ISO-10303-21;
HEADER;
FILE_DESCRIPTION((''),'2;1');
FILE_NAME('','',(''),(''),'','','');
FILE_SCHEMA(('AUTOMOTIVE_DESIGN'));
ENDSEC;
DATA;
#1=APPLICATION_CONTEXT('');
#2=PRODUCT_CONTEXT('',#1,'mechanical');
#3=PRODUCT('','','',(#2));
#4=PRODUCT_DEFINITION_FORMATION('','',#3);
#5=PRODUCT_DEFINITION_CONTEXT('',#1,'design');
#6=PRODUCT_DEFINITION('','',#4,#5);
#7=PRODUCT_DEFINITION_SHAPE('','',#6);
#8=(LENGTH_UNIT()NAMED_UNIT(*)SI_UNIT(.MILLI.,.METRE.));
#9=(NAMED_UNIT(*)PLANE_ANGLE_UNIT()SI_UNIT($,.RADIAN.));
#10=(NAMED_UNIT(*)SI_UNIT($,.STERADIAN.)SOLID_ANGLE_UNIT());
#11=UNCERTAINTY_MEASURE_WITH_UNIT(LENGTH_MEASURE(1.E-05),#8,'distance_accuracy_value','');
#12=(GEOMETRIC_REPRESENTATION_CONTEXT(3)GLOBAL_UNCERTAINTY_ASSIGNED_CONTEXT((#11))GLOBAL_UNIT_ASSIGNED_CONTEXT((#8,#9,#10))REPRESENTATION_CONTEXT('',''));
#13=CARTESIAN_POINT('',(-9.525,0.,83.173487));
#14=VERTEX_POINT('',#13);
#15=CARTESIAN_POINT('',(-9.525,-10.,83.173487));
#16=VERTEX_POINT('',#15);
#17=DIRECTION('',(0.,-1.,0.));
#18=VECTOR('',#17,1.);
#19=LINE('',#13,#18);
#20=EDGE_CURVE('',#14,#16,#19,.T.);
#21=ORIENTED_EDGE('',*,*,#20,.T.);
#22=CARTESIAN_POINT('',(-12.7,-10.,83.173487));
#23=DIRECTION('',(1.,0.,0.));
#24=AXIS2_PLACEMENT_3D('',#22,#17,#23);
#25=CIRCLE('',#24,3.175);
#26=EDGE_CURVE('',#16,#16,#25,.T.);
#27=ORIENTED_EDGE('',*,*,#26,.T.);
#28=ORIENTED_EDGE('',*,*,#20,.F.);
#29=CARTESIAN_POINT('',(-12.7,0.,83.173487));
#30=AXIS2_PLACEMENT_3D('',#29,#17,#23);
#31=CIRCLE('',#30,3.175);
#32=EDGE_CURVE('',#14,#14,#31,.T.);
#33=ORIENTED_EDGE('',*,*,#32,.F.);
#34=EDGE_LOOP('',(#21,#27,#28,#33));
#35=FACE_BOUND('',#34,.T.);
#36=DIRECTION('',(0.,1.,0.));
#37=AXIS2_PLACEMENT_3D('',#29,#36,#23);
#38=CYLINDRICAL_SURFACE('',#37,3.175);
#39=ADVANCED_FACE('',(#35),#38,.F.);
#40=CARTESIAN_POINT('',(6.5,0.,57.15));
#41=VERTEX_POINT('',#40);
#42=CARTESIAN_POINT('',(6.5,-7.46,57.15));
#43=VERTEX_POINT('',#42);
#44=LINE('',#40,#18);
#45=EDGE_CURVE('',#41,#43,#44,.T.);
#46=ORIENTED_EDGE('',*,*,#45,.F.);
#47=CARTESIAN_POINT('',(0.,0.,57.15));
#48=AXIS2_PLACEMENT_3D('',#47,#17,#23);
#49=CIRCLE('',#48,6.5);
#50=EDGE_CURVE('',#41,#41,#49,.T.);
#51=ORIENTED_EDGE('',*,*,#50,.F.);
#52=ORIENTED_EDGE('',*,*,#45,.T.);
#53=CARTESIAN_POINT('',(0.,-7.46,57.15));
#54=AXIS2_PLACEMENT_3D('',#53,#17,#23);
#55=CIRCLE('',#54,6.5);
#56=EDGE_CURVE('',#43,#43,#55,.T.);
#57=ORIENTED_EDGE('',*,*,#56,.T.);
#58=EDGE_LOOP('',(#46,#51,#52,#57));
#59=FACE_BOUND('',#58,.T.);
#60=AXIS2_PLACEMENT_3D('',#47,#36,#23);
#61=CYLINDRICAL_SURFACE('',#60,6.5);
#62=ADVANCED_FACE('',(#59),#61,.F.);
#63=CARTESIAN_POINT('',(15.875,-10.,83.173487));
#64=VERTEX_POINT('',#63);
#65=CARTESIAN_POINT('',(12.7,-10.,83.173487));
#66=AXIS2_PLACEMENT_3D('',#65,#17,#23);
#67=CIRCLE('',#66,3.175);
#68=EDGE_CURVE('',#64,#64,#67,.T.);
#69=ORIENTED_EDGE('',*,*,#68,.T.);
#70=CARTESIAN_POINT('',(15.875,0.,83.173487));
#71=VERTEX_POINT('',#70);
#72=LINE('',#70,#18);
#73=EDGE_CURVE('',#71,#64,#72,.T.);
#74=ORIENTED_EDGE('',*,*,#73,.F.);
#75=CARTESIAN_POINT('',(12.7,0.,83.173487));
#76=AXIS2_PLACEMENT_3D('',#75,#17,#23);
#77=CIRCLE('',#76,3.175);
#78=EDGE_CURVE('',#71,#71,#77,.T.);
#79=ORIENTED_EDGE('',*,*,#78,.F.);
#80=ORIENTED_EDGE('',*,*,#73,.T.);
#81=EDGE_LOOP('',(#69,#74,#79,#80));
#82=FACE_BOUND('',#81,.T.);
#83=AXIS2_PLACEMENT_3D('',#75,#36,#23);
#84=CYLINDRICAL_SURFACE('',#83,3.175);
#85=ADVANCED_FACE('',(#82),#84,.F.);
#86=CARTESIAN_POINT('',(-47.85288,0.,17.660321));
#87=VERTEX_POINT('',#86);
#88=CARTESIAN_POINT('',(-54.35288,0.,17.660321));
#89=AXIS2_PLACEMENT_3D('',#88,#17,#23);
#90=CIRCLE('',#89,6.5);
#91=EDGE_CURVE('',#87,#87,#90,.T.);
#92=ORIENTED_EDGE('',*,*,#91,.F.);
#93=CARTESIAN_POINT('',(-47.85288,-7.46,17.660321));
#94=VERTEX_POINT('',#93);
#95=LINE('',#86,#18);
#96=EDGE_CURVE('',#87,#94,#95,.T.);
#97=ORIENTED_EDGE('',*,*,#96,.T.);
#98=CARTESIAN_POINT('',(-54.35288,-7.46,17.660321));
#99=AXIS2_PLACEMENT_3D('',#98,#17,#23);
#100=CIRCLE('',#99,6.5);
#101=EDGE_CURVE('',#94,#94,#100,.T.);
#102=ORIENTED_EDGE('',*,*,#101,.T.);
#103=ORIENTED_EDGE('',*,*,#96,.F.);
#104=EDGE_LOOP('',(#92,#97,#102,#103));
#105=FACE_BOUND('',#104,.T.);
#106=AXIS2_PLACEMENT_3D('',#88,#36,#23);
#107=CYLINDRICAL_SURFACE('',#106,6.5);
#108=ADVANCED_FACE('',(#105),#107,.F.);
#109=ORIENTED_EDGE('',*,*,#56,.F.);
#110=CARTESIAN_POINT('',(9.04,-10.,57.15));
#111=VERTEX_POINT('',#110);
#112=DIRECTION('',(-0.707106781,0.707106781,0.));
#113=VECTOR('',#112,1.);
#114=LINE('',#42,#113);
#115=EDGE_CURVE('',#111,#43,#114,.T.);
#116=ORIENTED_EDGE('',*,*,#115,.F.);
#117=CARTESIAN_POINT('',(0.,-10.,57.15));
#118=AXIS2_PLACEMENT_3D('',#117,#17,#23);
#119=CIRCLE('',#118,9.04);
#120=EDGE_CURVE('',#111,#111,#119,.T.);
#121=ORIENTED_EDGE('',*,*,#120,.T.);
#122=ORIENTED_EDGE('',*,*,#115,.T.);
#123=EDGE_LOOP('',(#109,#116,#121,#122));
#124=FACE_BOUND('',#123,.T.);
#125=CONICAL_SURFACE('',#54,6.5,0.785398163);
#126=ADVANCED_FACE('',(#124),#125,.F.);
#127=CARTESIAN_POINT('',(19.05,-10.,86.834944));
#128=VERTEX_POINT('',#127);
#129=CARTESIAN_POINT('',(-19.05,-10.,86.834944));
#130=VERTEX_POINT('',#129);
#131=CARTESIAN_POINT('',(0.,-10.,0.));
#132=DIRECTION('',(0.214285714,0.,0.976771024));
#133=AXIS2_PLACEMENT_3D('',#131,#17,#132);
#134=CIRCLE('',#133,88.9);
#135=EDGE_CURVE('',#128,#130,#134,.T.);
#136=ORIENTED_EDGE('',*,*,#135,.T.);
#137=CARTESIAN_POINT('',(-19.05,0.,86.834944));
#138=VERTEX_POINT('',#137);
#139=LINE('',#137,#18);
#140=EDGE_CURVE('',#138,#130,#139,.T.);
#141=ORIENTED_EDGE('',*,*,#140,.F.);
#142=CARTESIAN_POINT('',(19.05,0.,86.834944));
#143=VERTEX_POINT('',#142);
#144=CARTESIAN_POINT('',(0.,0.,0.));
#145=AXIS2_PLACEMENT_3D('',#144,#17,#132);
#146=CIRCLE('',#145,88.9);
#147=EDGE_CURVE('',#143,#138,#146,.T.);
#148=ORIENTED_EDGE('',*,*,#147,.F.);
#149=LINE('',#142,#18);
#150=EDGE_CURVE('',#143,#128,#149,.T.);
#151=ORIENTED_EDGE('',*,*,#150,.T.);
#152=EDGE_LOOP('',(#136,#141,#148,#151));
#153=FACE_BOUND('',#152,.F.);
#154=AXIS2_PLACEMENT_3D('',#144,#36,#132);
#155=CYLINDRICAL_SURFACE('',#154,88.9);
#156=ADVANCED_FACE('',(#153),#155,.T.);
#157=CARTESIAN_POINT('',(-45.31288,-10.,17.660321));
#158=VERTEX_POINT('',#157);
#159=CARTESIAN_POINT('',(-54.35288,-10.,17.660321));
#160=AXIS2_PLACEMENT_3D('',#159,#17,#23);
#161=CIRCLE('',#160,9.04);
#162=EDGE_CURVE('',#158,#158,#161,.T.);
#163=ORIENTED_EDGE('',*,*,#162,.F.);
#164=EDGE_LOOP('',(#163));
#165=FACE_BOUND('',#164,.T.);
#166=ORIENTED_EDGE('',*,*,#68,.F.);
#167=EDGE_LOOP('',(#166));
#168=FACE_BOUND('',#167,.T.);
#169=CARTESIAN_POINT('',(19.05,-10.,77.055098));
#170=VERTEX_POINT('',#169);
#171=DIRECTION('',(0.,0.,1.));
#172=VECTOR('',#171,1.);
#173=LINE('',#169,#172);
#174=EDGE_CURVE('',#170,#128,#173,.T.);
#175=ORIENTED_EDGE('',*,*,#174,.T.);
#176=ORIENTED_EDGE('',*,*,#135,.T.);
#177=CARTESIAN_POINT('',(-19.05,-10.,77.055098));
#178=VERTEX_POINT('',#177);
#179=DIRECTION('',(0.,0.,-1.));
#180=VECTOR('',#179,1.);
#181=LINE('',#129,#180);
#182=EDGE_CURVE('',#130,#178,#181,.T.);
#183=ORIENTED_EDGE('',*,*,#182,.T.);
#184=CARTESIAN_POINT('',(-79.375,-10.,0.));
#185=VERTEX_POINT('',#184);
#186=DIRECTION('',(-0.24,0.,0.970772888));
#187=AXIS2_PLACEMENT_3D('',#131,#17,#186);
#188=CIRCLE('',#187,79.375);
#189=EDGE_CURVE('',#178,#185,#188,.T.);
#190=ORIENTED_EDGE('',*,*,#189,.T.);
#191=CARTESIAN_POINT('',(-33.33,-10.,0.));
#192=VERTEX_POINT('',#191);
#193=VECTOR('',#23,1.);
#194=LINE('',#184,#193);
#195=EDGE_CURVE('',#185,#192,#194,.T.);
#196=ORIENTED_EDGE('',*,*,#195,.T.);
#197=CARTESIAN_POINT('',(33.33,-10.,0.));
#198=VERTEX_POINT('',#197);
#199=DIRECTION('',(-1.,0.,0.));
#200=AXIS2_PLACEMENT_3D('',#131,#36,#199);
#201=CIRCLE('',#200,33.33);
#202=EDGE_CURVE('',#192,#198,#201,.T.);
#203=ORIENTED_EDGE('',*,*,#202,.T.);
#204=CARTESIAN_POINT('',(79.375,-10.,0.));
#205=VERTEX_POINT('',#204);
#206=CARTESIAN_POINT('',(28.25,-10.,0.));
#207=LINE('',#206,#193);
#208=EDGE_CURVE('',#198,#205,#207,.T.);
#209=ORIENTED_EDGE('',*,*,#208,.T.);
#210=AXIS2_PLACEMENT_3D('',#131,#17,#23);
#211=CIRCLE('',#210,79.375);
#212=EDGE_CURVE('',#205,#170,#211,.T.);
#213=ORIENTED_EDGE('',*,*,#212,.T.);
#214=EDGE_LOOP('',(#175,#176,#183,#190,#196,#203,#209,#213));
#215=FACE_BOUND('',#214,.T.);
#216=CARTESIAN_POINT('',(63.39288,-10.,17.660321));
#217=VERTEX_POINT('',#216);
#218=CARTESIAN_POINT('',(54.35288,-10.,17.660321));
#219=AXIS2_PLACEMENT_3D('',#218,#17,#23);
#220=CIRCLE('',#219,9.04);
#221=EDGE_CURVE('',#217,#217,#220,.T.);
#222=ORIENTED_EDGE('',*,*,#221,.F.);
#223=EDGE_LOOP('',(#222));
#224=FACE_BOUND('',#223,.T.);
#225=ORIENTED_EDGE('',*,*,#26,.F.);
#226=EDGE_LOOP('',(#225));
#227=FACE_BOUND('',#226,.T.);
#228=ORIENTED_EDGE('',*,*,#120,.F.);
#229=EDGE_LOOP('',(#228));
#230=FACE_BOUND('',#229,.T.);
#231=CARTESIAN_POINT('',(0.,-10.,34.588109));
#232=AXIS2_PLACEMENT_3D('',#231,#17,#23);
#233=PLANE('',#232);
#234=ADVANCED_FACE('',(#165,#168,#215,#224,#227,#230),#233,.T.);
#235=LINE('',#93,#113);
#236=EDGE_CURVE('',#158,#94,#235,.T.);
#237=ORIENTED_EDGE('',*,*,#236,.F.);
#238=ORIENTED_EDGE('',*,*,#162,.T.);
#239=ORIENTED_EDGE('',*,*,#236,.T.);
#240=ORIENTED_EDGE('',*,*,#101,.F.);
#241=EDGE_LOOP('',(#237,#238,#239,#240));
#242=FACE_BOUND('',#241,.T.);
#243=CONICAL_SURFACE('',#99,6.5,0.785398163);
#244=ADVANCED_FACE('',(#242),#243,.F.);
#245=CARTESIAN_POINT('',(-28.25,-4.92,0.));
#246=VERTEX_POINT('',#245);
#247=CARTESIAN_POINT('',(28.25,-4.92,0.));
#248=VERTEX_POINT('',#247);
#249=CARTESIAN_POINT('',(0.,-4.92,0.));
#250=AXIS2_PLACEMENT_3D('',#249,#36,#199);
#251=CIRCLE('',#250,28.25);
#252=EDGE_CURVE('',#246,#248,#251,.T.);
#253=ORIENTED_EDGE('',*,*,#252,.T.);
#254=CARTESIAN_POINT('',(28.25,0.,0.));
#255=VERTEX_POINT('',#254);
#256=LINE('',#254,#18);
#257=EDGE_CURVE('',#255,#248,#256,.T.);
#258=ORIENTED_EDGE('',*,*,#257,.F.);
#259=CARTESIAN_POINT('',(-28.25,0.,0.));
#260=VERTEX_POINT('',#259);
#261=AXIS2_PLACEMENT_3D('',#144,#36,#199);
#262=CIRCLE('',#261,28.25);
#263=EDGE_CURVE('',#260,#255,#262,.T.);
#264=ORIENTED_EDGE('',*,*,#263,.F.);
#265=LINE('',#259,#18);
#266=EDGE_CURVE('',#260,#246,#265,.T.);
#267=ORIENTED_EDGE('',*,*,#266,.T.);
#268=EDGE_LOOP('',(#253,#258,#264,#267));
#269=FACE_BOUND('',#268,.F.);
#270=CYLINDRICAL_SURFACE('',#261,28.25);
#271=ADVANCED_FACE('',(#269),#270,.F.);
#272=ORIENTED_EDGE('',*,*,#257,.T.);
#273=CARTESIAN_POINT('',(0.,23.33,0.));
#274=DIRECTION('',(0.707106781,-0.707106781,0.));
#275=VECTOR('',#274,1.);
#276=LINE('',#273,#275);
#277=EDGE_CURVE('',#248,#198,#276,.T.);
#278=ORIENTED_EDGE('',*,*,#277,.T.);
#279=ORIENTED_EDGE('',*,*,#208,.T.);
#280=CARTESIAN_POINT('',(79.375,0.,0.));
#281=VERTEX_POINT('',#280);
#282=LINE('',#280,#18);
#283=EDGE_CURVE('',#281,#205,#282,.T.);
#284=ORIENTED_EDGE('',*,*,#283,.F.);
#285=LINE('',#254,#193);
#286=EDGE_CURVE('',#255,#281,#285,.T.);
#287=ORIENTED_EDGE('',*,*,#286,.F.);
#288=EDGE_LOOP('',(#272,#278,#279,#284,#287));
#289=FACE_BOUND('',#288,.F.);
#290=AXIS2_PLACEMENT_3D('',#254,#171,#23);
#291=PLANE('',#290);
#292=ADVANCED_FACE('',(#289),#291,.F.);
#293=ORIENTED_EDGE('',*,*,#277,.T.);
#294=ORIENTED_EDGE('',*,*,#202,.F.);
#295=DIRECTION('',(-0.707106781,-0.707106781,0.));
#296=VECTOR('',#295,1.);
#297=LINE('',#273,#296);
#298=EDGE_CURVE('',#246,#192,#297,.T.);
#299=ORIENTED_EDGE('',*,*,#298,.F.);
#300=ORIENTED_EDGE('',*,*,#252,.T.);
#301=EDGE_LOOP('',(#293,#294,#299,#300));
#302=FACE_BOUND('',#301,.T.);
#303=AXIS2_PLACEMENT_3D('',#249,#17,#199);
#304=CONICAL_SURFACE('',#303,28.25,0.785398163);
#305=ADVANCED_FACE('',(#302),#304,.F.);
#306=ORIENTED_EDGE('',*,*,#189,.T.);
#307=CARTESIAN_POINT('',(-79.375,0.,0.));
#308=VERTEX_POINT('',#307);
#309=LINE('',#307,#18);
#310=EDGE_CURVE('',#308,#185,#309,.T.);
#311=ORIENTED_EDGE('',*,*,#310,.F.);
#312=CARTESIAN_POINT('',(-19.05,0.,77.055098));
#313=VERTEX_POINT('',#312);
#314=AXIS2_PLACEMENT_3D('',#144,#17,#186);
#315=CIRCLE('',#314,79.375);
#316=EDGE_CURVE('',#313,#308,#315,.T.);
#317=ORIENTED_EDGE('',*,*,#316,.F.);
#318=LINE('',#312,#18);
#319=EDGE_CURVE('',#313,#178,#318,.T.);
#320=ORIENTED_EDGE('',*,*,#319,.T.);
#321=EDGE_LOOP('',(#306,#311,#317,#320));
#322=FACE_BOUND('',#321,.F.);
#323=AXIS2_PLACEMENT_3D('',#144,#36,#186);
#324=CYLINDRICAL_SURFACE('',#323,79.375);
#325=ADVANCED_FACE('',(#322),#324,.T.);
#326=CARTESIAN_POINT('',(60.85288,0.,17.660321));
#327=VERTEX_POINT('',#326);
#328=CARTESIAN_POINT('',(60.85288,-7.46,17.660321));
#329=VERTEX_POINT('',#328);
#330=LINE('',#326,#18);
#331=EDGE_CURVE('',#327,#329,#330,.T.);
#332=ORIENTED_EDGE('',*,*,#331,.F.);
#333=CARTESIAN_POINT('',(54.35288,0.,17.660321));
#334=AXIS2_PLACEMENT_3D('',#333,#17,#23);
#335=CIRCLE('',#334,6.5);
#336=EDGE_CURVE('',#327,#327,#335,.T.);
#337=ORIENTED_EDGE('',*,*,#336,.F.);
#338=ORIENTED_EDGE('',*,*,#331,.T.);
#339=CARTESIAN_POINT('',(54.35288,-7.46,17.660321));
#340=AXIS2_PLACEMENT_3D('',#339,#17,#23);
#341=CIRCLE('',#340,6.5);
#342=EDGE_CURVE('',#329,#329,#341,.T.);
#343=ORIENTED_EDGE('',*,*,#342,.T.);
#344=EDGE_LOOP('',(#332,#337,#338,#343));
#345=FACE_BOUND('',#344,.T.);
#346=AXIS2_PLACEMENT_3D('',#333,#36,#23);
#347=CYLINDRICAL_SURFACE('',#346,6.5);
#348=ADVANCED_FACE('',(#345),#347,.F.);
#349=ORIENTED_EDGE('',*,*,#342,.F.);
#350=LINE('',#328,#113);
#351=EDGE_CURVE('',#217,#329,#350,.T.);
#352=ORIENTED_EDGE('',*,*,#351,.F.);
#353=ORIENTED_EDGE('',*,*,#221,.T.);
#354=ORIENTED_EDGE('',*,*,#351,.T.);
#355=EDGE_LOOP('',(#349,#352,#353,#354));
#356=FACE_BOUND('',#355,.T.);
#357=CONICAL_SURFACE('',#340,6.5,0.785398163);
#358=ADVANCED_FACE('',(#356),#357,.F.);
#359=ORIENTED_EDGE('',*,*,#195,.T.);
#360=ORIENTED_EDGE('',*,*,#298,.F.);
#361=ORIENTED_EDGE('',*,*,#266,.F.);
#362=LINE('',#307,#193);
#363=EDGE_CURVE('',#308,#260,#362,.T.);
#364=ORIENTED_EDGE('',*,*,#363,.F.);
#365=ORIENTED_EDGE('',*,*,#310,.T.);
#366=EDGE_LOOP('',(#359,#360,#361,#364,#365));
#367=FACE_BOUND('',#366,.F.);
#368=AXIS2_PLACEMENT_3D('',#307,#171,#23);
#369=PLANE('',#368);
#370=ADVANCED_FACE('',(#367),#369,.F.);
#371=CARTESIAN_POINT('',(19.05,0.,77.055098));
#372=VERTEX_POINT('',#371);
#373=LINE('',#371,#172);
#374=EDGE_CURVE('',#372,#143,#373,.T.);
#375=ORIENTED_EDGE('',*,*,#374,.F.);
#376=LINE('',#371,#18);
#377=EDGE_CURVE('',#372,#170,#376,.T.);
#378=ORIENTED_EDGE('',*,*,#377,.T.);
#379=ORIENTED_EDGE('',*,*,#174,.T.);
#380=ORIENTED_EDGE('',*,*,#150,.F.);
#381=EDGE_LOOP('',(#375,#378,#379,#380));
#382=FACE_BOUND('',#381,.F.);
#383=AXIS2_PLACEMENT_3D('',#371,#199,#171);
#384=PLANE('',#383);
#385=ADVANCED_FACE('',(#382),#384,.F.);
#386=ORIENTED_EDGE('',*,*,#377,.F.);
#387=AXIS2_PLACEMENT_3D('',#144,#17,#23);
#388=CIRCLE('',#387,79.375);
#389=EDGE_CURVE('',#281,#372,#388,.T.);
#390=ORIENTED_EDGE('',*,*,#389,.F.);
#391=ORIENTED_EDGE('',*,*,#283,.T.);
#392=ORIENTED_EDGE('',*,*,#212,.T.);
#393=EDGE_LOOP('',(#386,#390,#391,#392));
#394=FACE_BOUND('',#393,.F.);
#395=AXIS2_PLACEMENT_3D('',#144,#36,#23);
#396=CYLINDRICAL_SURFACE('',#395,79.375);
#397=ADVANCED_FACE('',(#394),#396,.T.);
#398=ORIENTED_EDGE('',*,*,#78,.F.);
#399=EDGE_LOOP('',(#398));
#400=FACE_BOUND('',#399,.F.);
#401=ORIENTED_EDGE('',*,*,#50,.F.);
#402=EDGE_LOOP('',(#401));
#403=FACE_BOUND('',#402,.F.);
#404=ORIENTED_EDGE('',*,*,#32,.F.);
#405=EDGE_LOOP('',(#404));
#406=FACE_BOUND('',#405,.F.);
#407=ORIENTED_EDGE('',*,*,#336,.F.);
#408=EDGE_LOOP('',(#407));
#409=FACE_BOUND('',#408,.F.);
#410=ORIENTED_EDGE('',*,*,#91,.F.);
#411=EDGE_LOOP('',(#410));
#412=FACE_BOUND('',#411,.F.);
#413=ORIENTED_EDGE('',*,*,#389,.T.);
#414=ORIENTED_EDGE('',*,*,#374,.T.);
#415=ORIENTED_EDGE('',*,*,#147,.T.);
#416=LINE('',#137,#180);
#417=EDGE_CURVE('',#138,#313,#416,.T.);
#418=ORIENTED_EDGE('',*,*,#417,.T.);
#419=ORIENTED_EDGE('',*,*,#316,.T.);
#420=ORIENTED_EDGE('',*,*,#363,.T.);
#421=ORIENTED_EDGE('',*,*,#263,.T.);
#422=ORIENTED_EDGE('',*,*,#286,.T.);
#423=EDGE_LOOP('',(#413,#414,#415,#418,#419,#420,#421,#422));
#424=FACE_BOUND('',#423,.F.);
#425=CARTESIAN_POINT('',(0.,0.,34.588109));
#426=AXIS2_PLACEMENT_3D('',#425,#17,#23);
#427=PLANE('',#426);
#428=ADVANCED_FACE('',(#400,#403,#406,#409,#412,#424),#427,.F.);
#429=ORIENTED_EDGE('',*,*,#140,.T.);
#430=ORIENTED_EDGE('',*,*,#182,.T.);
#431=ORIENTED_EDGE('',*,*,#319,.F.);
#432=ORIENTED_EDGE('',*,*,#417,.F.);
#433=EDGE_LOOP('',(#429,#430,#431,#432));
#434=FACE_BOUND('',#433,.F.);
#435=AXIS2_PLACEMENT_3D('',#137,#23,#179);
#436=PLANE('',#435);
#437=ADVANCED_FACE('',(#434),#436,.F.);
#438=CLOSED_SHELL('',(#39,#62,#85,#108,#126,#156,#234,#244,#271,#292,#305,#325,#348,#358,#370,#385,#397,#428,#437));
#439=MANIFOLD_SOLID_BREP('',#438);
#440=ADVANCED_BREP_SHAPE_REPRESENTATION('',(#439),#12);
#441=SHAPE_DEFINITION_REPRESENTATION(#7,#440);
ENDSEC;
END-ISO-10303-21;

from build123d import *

# Parameters (mm, degrees)
F2_R     = 6.5
F2_R_2   = 3.175
F3_DEPTH = 10
F0_SIZE  = 5.08
F1_SIZE  = 2.54


# Not quite as in the source:
# - a feature names something its author has since deleted; it is built from what else it names


with BuildPart() as f3:
    # F2 (on Front) → F3 (new body)
    with BuildSketch(Plane.XZ):
        with BuildLine():
            Line((-19.05, 86.834944003), (-19.05, 77.0550979819))
            ThreePointArc((-19.05, 77.0550979819), (-62.4999375, 48.9300361486), (-79.375, 0))
            Line((-79.375, 0), (-28.25, 0))
            ThreePointArc((-28.25, 0), (0, 28.25), (28.25, 0))
            Line((28.25, 0), (79.375, 0))
            ThreePointArc((79.375, 0), (62.4999375, 48.9300361486), (19.05, 77.0550979819))
            Line((19.05, 77.0550979819), (19.05, 86.834944003))
            ThreePointArc((19.05, 86.834944003), (0, 88.9), (-19.05, 86.834944003))
        make_face()
        with Locations((-54.3528799063, 17.6603212285)):
            Circle(F2_R, mode=Mode.SUBTRACT)
        with Locations((54.3528799063, 17.6603212285)):
            Circle(F2_R, mode=Mode.SUBTRACT)
        with Locations((-12.7, 83.1734867987)):
            Circle(F2_R_2, mode=Mode.SUBTRACT)
        with Locations((0, 57.15)):
            Circle(F2_R, mode=Mode.SUBTRACT)
        with Locations((12.7, 83.1734867987)):
            Circle(F2_R_2, mode=Mode.SUBTRACT)
    extrude(amount=F3_DEPTH)

    # F0
    f0_edges = [f3.edges().sort_by_distance(p)[0] for p in [
        (0, -10, 28.25),
    ]]
    chamfer(f0_edges, length=F0_SIZE)

    # F1
    f1_edges = [f3.edges().sort_by_distance(p)[0] for p in [
        (-6.5, -10, 57.15),
        (-60.85288, -10, 17.660321),
        (47.85288, -10, 17.660321),
    ]]
    chamfer(f1_edges, length=F1_SIZE)


solid = f3.part
